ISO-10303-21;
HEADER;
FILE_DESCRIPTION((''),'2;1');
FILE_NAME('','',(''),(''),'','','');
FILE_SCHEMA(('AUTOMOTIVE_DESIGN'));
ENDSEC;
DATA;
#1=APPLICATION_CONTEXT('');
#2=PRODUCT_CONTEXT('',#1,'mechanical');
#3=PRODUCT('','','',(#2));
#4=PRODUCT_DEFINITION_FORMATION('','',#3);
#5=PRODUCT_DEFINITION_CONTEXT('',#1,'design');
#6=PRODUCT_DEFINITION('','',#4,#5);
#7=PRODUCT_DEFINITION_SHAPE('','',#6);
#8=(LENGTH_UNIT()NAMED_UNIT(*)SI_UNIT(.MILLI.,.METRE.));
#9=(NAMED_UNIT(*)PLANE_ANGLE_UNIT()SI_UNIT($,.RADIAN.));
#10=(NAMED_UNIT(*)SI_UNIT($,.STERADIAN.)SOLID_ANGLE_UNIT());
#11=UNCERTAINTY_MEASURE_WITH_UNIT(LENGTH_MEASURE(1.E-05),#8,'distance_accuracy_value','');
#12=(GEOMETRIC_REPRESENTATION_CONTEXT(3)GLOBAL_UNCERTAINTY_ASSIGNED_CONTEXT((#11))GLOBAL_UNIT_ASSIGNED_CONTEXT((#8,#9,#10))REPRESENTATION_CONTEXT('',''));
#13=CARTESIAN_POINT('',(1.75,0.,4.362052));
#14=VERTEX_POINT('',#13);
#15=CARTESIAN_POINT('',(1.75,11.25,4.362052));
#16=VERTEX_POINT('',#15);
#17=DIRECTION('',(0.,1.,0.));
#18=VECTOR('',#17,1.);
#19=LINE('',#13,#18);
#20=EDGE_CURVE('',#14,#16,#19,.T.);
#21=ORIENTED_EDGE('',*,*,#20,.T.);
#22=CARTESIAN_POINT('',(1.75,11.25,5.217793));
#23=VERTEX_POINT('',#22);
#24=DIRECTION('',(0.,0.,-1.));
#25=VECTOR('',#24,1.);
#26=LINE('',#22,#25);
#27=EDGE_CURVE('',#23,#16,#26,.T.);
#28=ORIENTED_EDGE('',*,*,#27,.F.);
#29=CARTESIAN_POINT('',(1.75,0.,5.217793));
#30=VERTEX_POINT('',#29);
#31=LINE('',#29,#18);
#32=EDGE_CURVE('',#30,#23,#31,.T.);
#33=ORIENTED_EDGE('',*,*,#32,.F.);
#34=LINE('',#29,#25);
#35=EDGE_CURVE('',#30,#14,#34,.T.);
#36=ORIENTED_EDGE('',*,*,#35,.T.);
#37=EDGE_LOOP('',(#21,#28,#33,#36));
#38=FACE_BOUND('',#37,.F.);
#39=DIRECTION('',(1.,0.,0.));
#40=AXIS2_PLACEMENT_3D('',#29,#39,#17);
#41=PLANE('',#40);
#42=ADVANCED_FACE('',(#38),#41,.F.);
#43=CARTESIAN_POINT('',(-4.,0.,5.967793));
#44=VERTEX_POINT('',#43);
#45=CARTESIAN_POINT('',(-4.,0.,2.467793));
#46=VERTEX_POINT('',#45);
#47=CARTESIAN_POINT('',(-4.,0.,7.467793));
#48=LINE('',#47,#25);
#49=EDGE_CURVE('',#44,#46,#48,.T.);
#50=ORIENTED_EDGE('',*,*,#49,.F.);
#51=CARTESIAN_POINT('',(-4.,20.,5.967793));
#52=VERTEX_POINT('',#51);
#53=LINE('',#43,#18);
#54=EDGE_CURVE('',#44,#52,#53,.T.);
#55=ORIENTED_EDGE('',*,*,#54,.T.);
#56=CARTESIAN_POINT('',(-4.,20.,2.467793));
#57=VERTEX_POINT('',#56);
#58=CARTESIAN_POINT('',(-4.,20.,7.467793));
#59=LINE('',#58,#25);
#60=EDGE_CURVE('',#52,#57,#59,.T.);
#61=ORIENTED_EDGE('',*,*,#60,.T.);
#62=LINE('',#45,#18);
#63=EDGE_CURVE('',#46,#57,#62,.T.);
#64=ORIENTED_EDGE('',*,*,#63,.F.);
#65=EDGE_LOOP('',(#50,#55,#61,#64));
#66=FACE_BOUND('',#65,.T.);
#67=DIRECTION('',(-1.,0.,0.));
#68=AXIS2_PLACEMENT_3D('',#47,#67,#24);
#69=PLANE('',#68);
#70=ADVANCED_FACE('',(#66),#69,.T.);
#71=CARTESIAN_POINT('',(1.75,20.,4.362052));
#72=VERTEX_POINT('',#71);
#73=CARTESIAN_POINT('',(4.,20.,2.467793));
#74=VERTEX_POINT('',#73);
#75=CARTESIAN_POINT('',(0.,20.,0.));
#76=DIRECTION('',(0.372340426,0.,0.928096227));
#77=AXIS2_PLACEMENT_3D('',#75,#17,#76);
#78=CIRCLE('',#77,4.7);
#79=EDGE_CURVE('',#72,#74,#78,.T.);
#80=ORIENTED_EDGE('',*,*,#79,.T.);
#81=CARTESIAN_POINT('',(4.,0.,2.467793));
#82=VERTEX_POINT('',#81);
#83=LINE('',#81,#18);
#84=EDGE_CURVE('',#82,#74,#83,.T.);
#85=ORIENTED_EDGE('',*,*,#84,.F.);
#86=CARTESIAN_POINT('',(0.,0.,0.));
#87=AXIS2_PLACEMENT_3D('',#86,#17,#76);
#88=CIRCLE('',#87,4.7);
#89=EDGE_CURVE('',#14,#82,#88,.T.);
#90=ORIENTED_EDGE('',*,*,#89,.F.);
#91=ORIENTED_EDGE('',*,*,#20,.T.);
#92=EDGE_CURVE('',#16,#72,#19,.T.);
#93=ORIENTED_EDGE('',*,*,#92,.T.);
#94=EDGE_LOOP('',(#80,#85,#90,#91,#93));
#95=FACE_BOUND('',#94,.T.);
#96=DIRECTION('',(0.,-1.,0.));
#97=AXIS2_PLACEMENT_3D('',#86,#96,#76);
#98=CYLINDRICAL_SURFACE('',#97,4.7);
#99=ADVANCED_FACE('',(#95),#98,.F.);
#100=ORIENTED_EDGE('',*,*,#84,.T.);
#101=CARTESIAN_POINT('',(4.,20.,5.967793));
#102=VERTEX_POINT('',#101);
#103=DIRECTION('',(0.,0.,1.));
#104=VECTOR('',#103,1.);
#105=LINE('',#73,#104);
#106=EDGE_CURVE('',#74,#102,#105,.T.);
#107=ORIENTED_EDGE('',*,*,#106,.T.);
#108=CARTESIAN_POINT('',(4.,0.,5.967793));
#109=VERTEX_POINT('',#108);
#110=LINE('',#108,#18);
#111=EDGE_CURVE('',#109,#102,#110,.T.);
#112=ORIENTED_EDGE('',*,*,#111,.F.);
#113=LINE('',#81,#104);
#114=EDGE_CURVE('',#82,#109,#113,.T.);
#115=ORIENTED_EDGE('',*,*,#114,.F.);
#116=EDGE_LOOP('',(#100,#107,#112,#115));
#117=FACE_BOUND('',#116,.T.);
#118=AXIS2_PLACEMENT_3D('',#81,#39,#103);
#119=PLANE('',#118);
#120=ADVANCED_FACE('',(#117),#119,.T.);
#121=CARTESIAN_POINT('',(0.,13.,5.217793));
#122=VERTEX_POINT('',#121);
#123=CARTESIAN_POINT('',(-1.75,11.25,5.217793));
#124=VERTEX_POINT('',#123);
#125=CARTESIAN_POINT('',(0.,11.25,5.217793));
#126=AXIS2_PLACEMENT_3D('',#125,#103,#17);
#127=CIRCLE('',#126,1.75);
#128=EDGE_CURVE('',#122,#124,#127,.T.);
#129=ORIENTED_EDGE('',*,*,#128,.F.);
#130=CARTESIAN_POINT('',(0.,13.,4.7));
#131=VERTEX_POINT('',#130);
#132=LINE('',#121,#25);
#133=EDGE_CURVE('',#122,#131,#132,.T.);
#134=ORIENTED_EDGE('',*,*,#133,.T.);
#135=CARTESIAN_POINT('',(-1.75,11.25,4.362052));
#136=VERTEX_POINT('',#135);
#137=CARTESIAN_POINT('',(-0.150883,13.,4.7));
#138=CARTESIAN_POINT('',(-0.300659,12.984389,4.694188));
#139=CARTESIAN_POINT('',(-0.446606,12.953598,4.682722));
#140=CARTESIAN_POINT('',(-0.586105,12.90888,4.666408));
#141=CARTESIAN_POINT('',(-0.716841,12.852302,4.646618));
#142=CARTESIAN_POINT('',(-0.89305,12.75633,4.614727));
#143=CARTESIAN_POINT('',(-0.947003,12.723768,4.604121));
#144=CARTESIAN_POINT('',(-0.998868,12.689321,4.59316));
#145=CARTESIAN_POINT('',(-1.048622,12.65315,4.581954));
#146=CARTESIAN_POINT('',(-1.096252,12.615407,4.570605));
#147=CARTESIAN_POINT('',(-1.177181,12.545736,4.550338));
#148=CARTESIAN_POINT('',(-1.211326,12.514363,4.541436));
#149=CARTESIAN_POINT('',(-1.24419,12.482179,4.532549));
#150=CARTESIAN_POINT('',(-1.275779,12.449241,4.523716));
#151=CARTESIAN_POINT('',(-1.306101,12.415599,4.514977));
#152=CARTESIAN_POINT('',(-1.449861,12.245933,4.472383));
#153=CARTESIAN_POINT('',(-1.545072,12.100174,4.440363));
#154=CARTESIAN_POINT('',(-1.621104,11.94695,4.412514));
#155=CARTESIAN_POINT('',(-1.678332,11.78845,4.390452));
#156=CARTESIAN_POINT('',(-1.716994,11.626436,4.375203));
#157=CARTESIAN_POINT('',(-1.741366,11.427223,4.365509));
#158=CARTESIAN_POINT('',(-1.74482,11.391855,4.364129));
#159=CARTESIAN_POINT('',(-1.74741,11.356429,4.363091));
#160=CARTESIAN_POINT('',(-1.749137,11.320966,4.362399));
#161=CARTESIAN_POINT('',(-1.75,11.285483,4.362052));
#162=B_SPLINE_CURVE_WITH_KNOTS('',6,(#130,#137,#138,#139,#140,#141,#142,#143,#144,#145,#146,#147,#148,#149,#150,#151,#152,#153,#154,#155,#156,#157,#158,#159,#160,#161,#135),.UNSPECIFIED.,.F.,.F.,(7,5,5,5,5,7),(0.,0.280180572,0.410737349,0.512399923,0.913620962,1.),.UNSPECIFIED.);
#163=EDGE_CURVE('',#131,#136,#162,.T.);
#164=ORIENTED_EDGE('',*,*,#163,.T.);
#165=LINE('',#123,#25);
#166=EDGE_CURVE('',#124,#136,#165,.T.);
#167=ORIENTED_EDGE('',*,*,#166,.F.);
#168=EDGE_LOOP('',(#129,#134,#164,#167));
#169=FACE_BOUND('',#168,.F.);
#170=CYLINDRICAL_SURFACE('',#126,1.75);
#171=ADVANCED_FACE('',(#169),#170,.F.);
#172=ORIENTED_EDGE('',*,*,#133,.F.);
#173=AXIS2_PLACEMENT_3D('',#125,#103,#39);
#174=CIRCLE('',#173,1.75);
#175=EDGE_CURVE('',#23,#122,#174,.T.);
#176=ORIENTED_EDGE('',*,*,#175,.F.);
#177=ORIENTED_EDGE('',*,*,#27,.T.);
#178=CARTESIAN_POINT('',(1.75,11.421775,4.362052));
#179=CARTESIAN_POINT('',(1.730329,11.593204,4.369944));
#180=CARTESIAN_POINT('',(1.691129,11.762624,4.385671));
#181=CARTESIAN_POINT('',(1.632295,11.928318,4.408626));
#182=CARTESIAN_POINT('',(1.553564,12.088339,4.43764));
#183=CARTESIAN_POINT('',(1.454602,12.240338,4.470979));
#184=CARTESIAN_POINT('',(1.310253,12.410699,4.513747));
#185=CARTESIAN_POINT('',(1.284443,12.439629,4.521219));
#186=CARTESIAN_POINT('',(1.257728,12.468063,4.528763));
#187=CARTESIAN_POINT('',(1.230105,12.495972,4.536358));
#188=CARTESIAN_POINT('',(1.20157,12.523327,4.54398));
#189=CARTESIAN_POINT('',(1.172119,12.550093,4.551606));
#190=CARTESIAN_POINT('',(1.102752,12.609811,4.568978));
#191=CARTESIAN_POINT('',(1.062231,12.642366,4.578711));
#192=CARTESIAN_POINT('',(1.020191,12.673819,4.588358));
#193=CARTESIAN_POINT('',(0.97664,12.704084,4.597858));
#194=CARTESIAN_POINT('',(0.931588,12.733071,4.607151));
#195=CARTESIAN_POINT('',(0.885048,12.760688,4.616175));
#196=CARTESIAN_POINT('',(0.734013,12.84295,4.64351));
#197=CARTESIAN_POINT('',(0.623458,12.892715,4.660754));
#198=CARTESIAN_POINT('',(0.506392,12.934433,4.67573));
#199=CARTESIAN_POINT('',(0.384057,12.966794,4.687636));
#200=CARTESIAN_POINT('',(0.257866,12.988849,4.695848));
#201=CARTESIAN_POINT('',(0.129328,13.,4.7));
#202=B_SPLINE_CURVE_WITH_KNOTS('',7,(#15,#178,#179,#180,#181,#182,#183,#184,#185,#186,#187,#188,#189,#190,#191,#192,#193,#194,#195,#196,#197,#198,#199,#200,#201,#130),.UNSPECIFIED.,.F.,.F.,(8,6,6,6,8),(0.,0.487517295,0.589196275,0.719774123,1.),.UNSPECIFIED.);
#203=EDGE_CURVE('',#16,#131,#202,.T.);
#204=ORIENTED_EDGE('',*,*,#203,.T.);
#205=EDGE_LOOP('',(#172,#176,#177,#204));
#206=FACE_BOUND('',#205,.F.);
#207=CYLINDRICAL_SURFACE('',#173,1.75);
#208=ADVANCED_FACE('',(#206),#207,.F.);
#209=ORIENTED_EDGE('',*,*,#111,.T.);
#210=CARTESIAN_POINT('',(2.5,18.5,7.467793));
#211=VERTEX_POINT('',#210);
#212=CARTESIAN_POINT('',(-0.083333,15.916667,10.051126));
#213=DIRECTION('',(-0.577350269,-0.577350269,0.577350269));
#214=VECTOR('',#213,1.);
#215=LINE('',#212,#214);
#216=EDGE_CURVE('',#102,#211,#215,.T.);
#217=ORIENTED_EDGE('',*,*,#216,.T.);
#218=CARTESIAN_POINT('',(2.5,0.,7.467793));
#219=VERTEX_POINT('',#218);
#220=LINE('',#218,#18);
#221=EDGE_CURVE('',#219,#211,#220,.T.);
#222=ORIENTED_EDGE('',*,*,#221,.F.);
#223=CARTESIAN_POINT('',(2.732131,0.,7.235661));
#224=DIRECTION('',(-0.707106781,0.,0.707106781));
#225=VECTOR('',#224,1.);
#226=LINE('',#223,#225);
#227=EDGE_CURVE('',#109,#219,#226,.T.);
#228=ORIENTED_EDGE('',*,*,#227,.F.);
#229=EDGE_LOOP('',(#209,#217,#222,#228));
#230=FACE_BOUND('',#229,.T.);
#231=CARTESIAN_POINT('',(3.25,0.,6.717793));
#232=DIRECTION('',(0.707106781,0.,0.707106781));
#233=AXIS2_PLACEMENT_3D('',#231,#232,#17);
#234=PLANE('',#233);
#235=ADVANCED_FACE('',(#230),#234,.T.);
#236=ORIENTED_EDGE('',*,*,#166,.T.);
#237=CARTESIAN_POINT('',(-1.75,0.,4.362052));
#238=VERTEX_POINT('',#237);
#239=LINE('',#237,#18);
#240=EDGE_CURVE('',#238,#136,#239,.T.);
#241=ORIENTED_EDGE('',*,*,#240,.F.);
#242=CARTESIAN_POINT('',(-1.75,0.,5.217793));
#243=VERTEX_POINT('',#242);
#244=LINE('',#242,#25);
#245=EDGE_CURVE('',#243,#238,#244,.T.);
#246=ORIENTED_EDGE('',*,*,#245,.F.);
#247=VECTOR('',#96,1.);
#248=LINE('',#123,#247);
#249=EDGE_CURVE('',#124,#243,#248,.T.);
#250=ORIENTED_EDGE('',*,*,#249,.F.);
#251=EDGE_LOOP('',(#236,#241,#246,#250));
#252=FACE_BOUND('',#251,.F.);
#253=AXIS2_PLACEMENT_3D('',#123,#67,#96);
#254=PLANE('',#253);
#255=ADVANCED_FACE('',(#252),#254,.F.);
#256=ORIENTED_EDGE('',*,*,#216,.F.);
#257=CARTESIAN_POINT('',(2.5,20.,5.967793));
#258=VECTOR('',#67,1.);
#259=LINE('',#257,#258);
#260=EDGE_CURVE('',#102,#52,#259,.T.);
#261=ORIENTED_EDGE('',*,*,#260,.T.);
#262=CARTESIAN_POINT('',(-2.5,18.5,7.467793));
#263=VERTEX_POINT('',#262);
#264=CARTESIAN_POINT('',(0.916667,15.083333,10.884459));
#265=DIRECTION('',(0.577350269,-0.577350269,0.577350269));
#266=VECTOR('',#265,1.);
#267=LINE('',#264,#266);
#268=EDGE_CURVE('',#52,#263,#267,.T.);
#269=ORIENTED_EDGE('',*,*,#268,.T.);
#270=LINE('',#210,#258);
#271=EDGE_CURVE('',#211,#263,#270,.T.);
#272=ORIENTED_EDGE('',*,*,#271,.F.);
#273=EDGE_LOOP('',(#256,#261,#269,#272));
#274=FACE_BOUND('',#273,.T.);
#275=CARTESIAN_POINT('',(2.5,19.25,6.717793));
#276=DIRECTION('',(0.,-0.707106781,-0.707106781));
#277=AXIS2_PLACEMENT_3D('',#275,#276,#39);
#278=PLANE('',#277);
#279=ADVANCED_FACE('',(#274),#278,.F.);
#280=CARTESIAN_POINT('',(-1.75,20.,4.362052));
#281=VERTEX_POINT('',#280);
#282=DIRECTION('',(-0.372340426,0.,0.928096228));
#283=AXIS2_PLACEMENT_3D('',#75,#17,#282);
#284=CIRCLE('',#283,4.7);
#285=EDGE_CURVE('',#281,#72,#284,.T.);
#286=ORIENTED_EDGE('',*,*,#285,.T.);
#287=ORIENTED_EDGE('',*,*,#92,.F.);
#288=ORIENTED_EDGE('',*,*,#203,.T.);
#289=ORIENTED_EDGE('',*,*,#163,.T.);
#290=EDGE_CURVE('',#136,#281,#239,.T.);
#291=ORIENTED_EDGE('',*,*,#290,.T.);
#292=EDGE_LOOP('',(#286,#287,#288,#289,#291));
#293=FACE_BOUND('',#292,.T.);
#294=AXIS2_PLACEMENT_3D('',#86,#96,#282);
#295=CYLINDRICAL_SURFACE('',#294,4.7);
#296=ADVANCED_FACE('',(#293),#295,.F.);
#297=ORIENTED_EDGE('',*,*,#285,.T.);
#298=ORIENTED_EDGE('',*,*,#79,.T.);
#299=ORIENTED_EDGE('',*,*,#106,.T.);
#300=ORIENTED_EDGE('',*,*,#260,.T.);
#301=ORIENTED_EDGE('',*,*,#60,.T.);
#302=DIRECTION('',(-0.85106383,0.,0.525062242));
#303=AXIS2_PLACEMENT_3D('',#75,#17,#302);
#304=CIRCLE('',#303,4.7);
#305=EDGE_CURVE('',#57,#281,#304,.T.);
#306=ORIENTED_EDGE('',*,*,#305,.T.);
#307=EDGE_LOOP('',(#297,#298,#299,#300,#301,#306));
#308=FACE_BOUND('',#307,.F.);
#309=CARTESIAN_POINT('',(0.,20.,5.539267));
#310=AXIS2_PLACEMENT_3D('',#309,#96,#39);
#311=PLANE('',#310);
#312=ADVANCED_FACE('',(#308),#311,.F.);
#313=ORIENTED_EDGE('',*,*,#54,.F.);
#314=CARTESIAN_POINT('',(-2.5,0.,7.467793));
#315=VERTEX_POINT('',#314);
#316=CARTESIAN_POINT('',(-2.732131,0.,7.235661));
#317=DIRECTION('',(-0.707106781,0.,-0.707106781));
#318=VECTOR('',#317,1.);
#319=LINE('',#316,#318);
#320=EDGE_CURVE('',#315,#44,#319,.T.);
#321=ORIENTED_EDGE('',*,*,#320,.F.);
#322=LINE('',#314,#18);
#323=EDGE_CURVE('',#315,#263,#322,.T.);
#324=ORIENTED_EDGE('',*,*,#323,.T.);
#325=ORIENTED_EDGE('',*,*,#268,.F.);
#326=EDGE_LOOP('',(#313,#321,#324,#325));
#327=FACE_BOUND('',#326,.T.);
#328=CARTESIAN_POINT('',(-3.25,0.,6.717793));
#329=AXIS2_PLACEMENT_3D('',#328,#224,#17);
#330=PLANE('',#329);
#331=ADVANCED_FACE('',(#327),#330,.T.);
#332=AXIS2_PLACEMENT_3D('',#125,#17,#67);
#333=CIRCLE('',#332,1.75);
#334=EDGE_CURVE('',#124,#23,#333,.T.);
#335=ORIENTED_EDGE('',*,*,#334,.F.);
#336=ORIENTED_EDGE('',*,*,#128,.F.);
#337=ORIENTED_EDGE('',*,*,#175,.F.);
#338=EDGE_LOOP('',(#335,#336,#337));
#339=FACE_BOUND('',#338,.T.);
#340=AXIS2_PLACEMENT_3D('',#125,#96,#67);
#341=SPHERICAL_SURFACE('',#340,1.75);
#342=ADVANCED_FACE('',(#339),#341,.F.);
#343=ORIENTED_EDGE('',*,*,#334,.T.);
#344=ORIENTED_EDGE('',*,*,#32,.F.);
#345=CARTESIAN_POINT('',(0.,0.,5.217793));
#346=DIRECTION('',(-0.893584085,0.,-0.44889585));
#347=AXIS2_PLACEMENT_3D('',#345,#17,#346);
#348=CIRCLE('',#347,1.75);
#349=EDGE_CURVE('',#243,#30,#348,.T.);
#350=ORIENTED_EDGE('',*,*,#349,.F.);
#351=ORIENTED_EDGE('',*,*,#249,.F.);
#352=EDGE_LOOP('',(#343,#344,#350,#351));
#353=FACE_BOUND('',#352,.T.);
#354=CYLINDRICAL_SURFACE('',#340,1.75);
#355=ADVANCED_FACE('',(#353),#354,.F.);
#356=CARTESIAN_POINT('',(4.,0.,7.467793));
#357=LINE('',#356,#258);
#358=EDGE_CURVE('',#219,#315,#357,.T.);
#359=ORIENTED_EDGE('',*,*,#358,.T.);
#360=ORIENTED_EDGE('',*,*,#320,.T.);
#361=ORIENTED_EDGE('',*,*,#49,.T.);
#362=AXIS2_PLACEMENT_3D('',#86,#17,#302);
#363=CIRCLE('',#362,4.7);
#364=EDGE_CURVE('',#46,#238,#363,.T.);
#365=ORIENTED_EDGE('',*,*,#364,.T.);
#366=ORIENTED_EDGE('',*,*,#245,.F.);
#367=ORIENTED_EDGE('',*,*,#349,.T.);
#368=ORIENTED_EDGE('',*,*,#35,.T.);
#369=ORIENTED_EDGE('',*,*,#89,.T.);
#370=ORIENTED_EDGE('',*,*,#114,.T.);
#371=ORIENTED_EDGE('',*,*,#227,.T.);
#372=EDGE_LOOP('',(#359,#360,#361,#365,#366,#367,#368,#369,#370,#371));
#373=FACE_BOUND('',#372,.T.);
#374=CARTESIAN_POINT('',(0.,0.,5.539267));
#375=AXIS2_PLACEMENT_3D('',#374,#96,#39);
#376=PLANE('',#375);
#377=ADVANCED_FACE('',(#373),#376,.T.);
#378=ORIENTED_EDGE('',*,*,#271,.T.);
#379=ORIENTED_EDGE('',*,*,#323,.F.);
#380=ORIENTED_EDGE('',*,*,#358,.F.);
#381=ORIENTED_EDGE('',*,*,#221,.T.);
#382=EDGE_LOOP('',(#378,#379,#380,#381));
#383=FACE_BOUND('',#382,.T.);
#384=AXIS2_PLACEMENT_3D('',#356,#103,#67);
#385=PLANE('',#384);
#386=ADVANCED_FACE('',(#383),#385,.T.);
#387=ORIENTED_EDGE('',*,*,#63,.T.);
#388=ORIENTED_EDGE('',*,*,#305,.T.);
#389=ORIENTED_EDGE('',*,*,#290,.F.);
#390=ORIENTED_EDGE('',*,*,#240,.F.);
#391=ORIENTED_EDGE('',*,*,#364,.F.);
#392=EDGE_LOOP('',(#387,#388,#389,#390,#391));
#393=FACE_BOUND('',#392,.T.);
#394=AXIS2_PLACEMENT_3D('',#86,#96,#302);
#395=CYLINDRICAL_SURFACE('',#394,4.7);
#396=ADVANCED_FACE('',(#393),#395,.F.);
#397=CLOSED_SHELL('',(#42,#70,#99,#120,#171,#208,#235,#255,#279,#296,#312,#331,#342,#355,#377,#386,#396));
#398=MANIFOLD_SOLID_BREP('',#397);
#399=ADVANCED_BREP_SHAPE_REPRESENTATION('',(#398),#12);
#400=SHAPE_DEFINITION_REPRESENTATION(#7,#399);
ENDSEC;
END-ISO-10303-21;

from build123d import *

# Parameters (mm, degrees)
F5_DEPTH  = 20
F6_SIZE   = 1.5
F7_SIZE   = 1.5
F11_DEPTH = 2.7510001


# Not quite as in the source:
# - a feature names something its author has since deleted; it is built from what else it names


with BuildPart() as f5:
    # F4 (on Front) → F5 (new body)
    with BuildSketch(Plane.XZ):
        with BuildLine():
            ThreePointArc((1.75, 4.3620522693), (3.0269919036, 3.5954582483), (4, 2.4677925359))
            Line((4, 2.4677925359), (4, 7.4677925359))
            Line((4, 7.4677925359), (-4, 7.4677925359))
            Line((-4, 7.4677925359), (-4, 2.4677925359))
            ThreePointArc((-4, 2.4677925359), (-3.0269919036, 3.5954582483), (-1.75, 4.3620522693))
            Line((-1.75, 4.3620522693), (-1.75, 5.2177925359))
            ThreePointArc((-1.75, 5.2177925359), (0, 6.9677925359), (1.75, 5.2177925359))
            Line((1.75, 5.2177925359), (1.75, 4.3620522693))
        make_face()
        with BuildLine():
            ThreePointArc((-1.75, 4.3620522693), (0, 4.7), (1.75, 4.3620522693))
            Line((1.75, 4.3620522693), (1.75, 5.2177925359))
            ThreePointArc((1.75, 5.2177925359), (0, 6.9677925359), (-1.75, 5.2177925359))
            Line((-1.75, 5.2177925359), (-1.75, 4.3620522693))
        make_face()
    extrude(amount=-F5_DEPTH)

    # F6
    f6_edges = [f5.edges().sort_by_distance(p)[0] for p in [
        (-4, 10, 7.467793),
        (4, 10, 7.467793),
    ]]
    chamfer(f6_edges, length=F6_SIZE)

    # F7
    f7_edges = [f5.edges().sort_by_distance(p)[0] for p in [
        (0, 20, 7.467793),
    ]]
    chamfer(f7_edges, length=F7_SIZE)

    # F9 (on offset) → F10 (revolve, cut)
    with BuildSketch(Plane.XY.offset(5.2177925359)):
        with BuildLine():
            Line((-1.75, 11.25), (-1.75, 0))
            Line((-1.75, 0), (0, 0))
            Line((0, 0), (0, 13))
            ThreePointArc((0, 13), (-1.2374368671, 12.4874368671), (-1.75, 11.25))
        make_face()
    revolve(axis=Axis((0, 6.5, 5.2177925359), (0, 1, 0)), mode=Mode.SUBTRACT)

    # F9 (on offset) → F11 (cut, through all)
    with BuildSketch(Plane.XY.offset(5.2177925359)):
        with BuildLine():
            Line((0, 13), (0, 0))
            Line((0, 0), (1.75, 0))
            Line((1.75, 0), (1.75, 11.25))
            ThreePointArc((1.75, 11.25), (1.2374368671, 12.4874368671), (0, 13))
        make_face()
        with BuildLine():
            Line((-1.75, 11.25), (-1.75, 0))
            Line((-1.75, 0), (0, 0))
            Line((0, 0), (0, 13))
            ThreePointArc((0, 13), (-1.2374368671, 12.4874368671), (-1.75, 11.25))
        make_face()
    extrude(amount=-F11_DEPTH, mode=Mode.SUBTRACT)


solid = f5.part
